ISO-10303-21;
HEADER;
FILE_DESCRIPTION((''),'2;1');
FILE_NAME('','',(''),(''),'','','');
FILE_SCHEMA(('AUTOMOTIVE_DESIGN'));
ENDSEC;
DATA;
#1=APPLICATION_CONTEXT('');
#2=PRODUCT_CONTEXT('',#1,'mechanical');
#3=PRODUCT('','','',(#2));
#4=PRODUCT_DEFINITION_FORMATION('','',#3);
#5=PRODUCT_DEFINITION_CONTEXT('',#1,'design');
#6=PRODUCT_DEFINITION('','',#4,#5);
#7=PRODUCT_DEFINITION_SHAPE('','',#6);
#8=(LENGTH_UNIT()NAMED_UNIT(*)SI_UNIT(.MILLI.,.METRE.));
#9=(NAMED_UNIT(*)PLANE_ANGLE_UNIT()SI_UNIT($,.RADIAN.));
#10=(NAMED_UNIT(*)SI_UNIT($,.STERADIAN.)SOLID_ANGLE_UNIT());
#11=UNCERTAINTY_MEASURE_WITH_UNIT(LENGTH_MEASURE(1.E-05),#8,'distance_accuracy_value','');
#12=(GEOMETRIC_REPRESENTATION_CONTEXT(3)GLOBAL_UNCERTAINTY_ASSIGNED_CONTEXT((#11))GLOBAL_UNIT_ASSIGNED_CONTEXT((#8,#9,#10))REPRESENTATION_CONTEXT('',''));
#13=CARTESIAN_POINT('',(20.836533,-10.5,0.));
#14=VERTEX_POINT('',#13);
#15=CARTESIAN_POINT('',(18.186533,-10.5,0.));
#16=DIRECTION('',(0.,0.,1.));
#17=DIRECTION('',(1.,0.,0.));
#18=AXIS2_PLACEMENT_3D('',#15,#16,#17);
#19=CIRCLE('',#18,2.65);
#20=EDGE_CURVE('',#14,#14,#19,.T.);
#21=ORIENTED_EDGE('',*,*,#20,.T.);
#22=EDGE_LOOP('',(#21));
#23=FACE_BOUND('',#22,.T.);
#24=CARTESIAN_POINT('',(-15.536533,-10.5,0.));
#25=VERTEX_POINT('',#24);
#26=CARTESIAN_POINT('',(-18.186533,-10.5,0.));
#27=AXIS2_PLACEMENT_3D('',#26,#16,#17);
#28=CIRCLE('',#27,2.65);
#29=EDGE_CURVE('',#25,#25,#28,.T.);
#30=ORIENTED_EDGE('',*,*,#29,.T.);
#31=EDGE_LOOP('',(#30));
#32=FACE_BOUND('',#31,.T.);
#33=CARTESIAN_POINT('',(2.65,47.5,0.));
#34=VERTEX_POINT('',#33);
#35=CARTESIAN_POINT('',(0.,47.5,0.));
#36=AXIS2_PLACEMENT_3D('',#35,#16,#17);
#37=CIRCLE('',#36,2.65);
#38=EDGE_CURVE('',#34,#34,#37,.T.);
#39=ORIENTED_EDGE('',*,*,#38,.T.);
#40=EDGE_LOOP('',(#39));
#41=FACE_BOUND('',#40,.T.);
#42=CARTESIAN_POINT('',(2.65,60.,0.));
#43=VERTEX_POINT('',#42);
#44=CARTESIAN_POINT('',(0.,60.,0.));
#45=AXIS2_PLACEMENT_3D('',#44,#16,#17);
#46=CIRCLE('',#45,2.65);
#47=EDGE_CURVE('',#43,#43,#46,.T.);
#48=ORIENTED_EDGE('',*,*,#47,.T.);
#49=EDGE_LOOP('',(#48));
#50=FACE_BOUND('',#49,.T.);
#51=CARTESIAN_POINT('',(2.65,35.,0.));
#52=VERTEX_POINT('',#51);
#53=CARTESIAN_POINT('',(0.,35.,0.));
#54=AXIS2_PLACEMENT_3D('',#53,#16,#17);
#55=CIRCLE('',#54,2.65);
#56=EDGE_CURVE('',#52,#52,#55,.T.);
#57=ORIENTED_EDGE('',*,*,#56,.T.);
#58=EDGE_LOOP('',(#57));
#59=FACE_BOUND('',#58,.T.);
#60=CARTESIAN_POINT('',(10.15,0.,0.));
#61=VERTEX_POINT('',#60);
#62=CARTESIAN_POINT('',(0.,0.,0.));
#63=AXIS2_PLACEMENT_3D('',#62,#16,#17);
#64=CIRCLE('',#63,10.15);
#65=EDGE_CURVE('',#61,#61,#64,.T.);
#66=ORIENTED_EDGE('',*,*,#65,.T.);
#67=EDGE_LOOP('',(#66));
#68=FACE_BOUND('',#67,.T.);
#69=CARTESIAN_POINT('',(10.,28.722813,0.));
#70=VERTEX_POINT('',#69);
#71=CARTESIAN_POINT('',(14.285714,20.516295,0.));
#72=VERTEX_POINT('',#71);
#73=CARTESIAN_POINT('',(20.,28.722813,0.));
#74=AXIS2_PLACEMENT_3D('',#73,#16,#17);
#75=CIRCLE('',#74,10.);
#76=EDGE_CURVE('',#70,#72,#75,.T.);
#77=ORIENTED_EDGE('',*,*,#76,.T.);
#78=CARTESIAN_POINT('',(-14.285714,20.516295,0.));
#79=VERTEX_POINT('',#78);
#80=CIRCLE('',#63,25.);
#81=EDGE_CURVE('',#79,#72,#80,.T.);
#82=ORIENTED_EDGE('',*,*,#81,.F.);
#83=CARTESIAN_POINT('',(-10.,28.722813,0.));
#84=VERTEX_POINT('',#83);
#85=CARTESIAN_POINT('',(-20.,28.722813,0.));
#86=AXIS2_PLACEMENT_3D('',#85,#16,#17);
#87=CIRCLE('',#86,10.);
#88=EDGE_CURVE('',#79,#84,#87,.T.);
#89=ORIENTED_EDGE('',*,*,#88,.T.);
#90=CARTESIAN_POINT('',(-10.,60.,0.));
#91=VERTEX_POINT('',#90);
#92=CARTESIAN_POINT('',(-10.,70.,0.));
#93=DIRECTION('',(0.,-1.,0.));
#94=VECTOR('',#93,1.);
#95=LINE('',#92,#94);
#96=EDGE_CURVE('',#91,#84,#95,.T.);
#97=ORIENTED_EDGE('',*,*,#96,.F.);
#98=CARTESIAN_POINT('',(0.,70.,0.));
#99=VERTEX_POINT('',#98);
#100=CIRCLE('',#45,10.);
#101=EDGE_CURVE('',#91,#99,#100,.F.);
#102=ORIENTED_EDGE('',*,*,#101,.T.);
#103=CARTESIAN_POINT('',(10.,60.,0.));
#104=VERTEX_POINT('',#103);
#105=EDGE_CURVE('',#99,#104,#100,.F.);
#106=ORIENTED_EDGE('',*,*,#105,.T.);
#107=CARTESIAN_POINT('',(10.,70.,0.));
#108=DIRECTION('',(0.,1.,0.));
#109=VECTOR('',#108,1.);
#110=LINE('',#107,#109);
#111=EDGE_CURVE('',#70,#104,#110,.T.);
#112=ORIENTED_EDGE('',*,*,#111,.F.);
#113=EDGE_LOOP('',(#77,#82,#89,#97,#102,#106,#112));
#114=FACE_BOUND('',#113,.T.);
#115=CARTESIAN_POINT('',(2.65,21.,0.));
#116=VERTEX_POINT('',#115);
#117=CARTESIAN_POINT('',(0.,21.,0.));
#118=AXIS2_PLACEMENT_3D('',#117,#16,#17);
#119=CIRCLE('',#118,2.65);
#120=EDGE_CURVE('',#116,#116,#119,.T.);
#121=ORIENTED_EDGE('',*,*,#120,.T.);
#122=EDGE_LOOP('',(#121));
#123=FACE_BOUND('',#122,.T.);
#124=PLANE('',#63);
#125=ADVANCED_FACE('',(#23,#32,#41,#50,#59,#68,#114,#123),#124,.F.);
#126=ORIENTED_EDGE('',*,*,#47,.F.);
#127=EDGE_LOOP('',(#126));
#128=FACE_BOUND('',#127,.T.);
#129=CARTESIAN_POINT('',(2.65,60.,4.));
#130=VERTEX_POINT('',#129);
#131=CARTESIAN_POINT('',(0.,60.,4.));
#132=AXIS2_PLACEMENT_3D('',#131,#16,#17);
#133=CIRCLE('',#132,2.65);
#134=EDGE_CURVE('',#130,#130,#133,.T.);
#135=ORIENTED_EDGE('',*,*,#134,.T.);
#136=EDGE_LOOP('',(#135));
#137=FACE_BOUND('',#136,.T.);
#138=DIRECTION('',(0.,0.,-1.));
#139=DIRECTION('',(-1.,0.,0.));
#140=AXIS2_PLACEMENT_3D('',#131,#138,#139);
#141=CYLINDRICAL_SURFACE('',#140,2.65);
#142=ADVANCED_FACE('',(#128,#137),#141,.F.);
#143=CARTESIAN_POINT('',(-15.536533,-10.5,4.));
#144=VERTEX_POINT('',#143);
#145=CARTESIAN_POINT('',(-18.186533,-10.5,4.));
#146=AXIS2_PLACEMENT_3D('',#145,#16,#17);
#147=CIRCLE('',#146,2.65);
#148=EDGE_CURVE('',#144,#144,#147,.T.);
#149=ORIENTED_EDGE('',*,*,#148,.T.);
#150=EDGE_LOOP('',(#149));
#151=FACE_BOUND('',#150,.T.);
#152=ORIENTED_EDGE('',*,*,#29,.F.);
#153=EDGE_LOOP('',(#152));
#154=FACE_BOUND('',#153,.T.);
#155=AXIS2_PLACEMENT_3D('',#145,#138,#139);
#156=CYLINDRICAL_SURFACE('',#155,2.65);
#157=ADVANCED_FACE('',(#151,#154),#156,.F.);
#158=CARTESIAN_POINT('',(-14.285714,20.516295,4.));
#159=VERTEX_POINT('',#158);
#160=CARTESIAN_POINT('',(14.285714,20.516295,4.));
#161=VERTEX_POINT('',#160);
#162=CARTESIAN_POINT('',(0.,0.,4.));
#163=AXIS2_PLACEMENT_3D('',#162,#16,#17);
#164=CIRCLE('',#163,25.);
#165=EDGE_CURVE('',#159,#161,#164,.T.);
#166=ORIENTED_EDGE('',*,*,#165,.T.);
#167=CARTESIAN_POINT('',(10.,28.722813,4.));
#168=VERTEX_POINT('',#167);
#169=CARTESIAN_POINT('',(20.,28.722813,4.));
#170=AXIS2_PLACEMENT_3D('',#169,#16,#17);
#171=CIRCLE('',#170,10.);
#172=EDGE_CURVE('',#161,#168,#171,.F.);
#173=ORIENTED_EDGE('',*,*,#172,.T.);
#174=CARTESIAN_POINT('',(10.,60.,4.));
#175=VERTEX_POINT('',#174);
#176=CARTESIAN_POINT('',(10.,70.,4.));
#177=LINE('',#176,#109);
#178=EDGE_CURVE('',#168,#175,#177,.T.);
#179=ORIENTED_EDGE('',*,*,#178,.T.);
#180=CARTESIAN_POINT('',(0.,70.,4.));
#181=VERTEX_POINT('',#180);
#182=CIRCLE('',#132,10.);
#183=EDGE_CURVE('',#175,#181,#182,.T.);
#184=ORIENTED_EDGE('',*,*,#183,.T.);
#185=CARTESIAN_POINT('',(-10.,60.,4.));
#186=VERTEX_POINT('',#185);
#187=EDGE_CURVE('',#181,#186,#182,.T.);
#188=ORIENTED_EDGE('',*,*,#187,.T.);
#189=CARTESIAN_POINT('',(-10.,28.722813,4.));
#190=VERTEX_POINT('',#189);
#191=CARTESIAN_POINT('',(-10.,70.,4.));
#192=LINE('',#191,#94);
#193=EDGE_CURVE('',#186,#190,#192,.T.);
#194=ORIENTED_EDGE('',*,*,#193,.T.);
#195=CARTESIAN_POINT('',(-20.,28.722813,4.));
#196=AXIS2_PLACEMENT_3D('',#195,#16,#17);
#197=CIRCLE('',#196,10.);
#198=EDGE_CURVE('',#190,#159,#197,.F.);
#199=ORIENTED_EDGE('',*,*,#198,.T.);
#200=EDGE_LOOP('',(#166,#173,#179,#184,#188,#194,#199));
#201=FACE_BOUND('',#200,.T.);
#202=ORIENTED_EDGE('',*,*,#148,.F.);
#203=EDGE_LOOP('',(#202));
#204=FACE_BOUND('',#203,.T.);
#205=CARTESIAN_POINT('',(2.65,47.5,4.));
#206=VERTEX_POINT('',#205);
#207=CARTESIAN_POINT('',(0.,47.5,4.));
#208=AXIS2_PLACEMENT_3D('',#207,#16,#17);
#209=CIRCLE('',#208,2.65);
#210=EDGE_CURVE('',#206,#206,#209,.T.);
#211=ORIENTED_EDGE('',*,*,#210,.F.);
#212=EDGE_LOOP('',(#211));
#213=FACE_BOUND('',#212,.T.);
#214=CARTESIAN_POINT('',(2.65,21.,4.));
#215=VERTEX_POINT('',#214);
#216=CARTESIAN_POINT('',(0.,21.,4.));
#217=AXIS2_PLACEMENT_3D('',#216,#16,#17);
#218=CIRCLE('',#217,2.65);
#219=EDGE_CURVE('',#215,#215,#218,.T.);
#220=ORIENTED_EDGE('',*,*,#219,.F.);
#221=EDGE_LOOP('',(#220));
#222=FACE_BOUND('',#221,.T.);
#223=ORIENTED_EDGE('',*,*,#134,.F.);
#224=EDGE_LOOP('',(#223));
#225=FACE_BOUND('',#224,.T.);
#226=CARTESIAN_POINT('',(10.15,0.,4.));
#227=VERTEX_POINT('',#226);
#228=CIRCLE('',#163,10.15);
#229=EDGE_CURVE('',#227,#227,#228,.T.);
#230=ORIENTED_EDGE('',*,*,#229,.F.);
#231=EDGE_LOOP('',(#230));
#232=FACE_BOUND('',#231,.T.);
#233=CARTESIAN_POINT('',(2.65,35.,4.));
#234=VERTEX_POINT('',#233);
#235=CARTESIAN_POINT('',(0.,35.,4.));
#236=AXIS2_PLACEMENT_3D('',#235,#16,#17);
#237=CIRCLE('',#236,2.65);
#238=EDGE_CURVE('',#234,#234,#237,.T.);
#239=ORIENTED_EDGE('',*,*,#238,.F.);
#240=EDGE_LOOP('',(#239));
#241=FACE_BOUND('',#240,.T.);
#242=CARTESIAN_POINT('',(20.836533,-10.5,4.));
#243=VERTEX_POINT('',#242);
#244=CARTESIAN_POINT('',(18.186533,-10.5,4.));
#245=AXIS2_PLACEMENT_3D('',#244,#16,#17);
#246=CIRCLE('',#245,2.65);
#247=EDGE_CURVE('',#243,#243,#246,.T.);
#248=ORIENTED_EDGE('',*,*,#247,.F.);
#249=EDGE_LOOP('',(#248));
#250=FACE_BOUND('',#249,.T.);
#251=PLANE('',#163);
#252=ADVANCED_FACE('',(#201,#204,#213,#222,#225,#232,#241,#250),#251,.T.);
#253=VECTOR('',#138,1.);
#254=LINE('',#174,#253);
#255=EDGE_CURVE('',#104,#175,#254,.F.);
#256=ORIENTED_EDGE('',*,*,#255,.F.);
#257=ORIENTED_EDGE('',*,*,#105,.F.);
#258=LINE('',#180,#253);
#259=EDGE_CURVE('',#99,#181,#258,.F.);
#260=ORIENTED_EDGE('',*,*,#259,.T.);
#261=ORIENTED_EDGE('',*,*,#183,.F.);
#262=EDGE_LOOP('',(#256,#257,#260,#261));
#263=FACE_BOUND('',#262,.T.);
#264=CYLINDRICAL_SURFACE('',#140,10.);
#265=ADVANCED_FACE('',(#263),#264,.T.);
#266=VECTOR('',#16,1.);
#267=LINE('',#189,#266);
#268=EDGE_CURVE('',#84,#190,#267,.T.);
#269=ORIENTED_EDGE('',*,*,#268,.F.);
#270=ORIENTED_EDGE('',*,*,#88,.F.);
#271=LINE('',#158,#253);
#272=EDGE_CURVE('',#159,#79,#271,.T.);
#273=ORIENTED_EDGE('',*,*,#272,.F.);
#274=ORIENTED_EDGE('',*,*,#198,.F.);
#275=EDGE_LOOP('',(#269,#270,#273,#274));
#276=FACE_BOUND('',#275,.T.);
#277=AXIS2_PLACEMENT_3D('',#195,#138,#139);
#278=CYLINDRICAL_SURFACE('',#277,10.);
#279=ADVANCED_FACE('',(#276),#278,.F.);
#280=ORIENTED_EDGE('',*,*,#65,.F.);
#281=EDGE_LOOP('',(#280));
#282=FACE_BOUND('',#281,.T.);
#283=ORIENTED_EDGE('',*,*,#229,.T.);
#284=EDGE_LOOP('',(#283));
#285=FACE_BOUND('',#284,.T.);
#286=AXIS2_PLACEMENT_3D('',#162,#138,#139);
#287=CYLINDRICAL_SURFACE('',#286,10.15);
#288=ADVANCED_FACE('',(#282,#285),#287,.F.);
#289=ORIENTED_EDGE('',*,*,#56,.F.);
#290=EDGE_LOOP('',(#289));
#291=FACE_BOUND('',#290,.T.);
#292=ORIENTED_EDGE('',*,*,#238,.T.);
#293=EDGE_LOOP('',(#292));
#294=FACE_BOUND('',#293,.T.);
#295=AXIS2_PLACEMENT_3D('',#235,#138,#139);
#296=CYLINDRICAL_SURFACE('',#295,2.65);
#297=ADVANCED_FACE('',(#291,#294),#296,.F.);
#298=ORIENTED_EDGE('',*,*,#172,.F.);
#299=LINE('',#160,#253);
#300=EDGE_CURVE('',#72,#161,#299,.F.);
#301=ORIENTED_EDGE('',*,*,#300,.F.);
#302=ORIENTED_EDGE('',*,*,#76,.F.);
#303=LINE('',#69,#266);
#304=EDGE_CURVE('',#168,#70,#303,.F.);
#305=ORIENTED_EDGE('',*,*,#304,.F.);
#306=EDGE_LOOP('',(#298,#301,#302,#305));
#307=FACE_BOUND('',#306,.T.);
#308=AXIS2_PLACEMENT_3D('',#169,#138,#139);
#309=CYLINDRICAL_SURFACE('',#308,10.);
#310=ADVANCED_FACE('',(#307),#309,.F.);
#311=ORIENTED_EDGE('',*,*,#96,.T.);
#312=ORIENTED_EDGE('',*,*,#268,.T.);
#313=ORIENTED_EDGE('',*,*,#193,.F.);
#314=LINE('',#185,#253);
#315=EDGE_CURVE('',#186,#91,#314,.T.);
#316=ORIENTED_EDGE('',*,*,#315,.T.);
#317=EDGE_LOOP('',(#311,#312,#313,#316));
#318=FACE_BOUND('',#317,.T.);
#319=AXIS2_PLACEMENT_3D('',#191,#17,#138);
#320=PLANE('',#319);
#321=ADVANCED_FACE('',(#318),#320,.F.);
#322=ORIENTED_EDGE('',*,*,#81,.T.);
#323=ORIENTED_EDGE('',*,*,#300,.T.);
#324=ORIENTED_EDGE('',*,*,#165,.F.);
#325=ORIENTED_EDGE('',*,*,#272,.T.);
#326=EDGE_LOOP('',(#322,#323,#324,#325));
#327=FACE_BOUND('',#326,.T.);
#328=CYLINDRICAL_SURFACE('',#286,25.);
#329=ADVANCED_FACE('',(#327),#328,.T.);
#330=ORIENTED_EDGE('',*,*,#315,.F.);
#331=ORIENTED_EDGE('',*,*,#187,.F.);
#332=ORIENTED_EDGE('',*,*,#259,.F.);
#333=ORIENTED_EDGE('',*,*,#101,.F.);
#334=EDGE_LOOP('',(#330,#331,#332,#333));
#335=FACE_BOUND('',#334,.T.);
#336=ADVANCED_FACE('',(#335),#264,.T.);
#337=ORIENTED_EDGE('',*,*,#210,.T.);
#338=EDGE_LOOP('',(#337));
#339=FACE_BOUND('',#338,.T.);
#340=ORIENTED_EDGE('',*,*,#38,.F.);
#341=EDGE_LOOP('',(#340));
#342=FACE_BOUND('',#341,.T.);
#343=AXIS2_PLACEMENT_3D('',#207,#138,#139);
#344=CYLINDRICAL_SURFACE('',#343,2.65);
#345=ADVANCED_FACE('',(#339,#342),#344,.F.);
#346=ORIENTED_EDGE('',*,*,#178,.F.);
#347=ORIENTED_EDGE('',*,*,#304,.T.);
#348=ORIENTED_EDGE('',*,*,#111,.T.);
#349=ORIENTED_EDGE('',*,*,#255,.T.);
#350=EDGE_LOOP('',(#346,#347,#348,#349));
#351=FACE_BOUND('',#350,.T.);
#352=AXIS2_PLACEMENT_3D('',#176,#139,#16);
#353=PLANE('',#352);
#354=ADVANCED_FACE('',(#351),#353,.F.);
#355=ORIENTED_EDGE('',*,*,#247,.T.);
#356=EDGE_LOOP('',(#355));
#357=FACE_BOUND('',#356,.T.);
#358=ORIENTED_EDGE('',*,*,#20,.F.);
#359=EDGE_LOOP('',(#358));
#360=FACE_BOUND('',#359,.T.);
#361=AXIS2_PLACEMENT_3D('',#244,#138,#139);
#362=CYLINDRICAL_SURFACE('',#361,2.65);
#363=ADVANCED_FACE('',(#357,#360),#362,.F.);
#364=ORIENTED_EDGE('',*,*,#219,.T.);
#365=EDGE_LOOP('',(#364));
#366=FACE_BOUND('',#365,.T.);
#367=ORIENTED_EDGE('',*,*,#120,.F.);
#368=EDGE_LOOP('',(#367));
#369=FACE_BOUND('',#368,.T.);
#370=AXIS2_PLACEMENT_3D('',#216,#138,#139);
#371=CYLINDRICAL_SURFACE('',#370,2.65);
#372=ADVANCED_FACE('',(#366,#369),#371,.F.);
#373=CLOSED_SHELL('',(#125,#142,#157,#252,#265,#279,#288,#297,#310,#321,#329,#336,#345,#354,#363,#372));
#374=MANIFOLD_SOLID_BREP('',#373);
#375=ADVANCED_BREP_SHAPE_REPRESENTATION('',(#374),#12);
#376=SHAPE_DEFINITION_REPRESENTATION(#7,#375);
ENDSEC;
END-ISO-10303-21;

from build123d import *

# Parameters (mm, degrees)
SKETCH_1_R      = 10.15
SKETCH_1_R_2    = 2.65
EXTRUDE_1_DEPTH = 4
FILLET_1_R      = 10


with BuildPart() as part:
    # 草图1 → 凸台-拉伸1 (new body)
    with BuildSketch(Plane.XY):
        with BuildLine():
            Line((-10, 70), (-10, 22.912878475))
            ThreePointArc((-10, 22.912878475), (0, -25), (10, 22.912878475))
            Line((10, 22.912878475), (10, 70))
            Line((10, 70), (-10, 70))
        make_face()
        Circle(SKETCH_1_R, mode=Mode.SUBTRACT)
        with Locations((0, 21)):
            Circle(SKETCH_1_R_2, mode=Mode.SUBTRACT)
        with Locations((18.186533479, -10.5)):
            Circle(SKETCH_1_R_2, mode=Mode.SUBTRACT)
        with Locations((-18.186533479, -10.5)):
            Circle(SKETCH_1_R_2, mode=Mode.SUBTRACT)
        with Locations((0, 60)):
            Circle(SKETCH_1_R_2, mode=Mode.SUBTRACT)
        with Locations((0, 35)):
            Circle(SKETCH_1_R_2, mode=Mode.SUBTRACT)
        with Locations((0, 47.5)):
            Circle(SKETCH_1_R_2, mode=Mode.SUBTRACT)
    extrude(amount=EXTRUDE_1_DEPTH)

    # 圆角1
    fillet_1_edges = [part.edges().sort_by_distance(p)[0] for p in [
        (10, 22.912878475, 2),
        (10, 70, 2),
        (-10, 70, 2),
        (-10, 22.912878475, 2),
    ]]
    fillet(fillet_1_edges, radius=FILLET_1_R - 0.0001)  # a hair under: the kernel refuses the full size


solid = part.part
